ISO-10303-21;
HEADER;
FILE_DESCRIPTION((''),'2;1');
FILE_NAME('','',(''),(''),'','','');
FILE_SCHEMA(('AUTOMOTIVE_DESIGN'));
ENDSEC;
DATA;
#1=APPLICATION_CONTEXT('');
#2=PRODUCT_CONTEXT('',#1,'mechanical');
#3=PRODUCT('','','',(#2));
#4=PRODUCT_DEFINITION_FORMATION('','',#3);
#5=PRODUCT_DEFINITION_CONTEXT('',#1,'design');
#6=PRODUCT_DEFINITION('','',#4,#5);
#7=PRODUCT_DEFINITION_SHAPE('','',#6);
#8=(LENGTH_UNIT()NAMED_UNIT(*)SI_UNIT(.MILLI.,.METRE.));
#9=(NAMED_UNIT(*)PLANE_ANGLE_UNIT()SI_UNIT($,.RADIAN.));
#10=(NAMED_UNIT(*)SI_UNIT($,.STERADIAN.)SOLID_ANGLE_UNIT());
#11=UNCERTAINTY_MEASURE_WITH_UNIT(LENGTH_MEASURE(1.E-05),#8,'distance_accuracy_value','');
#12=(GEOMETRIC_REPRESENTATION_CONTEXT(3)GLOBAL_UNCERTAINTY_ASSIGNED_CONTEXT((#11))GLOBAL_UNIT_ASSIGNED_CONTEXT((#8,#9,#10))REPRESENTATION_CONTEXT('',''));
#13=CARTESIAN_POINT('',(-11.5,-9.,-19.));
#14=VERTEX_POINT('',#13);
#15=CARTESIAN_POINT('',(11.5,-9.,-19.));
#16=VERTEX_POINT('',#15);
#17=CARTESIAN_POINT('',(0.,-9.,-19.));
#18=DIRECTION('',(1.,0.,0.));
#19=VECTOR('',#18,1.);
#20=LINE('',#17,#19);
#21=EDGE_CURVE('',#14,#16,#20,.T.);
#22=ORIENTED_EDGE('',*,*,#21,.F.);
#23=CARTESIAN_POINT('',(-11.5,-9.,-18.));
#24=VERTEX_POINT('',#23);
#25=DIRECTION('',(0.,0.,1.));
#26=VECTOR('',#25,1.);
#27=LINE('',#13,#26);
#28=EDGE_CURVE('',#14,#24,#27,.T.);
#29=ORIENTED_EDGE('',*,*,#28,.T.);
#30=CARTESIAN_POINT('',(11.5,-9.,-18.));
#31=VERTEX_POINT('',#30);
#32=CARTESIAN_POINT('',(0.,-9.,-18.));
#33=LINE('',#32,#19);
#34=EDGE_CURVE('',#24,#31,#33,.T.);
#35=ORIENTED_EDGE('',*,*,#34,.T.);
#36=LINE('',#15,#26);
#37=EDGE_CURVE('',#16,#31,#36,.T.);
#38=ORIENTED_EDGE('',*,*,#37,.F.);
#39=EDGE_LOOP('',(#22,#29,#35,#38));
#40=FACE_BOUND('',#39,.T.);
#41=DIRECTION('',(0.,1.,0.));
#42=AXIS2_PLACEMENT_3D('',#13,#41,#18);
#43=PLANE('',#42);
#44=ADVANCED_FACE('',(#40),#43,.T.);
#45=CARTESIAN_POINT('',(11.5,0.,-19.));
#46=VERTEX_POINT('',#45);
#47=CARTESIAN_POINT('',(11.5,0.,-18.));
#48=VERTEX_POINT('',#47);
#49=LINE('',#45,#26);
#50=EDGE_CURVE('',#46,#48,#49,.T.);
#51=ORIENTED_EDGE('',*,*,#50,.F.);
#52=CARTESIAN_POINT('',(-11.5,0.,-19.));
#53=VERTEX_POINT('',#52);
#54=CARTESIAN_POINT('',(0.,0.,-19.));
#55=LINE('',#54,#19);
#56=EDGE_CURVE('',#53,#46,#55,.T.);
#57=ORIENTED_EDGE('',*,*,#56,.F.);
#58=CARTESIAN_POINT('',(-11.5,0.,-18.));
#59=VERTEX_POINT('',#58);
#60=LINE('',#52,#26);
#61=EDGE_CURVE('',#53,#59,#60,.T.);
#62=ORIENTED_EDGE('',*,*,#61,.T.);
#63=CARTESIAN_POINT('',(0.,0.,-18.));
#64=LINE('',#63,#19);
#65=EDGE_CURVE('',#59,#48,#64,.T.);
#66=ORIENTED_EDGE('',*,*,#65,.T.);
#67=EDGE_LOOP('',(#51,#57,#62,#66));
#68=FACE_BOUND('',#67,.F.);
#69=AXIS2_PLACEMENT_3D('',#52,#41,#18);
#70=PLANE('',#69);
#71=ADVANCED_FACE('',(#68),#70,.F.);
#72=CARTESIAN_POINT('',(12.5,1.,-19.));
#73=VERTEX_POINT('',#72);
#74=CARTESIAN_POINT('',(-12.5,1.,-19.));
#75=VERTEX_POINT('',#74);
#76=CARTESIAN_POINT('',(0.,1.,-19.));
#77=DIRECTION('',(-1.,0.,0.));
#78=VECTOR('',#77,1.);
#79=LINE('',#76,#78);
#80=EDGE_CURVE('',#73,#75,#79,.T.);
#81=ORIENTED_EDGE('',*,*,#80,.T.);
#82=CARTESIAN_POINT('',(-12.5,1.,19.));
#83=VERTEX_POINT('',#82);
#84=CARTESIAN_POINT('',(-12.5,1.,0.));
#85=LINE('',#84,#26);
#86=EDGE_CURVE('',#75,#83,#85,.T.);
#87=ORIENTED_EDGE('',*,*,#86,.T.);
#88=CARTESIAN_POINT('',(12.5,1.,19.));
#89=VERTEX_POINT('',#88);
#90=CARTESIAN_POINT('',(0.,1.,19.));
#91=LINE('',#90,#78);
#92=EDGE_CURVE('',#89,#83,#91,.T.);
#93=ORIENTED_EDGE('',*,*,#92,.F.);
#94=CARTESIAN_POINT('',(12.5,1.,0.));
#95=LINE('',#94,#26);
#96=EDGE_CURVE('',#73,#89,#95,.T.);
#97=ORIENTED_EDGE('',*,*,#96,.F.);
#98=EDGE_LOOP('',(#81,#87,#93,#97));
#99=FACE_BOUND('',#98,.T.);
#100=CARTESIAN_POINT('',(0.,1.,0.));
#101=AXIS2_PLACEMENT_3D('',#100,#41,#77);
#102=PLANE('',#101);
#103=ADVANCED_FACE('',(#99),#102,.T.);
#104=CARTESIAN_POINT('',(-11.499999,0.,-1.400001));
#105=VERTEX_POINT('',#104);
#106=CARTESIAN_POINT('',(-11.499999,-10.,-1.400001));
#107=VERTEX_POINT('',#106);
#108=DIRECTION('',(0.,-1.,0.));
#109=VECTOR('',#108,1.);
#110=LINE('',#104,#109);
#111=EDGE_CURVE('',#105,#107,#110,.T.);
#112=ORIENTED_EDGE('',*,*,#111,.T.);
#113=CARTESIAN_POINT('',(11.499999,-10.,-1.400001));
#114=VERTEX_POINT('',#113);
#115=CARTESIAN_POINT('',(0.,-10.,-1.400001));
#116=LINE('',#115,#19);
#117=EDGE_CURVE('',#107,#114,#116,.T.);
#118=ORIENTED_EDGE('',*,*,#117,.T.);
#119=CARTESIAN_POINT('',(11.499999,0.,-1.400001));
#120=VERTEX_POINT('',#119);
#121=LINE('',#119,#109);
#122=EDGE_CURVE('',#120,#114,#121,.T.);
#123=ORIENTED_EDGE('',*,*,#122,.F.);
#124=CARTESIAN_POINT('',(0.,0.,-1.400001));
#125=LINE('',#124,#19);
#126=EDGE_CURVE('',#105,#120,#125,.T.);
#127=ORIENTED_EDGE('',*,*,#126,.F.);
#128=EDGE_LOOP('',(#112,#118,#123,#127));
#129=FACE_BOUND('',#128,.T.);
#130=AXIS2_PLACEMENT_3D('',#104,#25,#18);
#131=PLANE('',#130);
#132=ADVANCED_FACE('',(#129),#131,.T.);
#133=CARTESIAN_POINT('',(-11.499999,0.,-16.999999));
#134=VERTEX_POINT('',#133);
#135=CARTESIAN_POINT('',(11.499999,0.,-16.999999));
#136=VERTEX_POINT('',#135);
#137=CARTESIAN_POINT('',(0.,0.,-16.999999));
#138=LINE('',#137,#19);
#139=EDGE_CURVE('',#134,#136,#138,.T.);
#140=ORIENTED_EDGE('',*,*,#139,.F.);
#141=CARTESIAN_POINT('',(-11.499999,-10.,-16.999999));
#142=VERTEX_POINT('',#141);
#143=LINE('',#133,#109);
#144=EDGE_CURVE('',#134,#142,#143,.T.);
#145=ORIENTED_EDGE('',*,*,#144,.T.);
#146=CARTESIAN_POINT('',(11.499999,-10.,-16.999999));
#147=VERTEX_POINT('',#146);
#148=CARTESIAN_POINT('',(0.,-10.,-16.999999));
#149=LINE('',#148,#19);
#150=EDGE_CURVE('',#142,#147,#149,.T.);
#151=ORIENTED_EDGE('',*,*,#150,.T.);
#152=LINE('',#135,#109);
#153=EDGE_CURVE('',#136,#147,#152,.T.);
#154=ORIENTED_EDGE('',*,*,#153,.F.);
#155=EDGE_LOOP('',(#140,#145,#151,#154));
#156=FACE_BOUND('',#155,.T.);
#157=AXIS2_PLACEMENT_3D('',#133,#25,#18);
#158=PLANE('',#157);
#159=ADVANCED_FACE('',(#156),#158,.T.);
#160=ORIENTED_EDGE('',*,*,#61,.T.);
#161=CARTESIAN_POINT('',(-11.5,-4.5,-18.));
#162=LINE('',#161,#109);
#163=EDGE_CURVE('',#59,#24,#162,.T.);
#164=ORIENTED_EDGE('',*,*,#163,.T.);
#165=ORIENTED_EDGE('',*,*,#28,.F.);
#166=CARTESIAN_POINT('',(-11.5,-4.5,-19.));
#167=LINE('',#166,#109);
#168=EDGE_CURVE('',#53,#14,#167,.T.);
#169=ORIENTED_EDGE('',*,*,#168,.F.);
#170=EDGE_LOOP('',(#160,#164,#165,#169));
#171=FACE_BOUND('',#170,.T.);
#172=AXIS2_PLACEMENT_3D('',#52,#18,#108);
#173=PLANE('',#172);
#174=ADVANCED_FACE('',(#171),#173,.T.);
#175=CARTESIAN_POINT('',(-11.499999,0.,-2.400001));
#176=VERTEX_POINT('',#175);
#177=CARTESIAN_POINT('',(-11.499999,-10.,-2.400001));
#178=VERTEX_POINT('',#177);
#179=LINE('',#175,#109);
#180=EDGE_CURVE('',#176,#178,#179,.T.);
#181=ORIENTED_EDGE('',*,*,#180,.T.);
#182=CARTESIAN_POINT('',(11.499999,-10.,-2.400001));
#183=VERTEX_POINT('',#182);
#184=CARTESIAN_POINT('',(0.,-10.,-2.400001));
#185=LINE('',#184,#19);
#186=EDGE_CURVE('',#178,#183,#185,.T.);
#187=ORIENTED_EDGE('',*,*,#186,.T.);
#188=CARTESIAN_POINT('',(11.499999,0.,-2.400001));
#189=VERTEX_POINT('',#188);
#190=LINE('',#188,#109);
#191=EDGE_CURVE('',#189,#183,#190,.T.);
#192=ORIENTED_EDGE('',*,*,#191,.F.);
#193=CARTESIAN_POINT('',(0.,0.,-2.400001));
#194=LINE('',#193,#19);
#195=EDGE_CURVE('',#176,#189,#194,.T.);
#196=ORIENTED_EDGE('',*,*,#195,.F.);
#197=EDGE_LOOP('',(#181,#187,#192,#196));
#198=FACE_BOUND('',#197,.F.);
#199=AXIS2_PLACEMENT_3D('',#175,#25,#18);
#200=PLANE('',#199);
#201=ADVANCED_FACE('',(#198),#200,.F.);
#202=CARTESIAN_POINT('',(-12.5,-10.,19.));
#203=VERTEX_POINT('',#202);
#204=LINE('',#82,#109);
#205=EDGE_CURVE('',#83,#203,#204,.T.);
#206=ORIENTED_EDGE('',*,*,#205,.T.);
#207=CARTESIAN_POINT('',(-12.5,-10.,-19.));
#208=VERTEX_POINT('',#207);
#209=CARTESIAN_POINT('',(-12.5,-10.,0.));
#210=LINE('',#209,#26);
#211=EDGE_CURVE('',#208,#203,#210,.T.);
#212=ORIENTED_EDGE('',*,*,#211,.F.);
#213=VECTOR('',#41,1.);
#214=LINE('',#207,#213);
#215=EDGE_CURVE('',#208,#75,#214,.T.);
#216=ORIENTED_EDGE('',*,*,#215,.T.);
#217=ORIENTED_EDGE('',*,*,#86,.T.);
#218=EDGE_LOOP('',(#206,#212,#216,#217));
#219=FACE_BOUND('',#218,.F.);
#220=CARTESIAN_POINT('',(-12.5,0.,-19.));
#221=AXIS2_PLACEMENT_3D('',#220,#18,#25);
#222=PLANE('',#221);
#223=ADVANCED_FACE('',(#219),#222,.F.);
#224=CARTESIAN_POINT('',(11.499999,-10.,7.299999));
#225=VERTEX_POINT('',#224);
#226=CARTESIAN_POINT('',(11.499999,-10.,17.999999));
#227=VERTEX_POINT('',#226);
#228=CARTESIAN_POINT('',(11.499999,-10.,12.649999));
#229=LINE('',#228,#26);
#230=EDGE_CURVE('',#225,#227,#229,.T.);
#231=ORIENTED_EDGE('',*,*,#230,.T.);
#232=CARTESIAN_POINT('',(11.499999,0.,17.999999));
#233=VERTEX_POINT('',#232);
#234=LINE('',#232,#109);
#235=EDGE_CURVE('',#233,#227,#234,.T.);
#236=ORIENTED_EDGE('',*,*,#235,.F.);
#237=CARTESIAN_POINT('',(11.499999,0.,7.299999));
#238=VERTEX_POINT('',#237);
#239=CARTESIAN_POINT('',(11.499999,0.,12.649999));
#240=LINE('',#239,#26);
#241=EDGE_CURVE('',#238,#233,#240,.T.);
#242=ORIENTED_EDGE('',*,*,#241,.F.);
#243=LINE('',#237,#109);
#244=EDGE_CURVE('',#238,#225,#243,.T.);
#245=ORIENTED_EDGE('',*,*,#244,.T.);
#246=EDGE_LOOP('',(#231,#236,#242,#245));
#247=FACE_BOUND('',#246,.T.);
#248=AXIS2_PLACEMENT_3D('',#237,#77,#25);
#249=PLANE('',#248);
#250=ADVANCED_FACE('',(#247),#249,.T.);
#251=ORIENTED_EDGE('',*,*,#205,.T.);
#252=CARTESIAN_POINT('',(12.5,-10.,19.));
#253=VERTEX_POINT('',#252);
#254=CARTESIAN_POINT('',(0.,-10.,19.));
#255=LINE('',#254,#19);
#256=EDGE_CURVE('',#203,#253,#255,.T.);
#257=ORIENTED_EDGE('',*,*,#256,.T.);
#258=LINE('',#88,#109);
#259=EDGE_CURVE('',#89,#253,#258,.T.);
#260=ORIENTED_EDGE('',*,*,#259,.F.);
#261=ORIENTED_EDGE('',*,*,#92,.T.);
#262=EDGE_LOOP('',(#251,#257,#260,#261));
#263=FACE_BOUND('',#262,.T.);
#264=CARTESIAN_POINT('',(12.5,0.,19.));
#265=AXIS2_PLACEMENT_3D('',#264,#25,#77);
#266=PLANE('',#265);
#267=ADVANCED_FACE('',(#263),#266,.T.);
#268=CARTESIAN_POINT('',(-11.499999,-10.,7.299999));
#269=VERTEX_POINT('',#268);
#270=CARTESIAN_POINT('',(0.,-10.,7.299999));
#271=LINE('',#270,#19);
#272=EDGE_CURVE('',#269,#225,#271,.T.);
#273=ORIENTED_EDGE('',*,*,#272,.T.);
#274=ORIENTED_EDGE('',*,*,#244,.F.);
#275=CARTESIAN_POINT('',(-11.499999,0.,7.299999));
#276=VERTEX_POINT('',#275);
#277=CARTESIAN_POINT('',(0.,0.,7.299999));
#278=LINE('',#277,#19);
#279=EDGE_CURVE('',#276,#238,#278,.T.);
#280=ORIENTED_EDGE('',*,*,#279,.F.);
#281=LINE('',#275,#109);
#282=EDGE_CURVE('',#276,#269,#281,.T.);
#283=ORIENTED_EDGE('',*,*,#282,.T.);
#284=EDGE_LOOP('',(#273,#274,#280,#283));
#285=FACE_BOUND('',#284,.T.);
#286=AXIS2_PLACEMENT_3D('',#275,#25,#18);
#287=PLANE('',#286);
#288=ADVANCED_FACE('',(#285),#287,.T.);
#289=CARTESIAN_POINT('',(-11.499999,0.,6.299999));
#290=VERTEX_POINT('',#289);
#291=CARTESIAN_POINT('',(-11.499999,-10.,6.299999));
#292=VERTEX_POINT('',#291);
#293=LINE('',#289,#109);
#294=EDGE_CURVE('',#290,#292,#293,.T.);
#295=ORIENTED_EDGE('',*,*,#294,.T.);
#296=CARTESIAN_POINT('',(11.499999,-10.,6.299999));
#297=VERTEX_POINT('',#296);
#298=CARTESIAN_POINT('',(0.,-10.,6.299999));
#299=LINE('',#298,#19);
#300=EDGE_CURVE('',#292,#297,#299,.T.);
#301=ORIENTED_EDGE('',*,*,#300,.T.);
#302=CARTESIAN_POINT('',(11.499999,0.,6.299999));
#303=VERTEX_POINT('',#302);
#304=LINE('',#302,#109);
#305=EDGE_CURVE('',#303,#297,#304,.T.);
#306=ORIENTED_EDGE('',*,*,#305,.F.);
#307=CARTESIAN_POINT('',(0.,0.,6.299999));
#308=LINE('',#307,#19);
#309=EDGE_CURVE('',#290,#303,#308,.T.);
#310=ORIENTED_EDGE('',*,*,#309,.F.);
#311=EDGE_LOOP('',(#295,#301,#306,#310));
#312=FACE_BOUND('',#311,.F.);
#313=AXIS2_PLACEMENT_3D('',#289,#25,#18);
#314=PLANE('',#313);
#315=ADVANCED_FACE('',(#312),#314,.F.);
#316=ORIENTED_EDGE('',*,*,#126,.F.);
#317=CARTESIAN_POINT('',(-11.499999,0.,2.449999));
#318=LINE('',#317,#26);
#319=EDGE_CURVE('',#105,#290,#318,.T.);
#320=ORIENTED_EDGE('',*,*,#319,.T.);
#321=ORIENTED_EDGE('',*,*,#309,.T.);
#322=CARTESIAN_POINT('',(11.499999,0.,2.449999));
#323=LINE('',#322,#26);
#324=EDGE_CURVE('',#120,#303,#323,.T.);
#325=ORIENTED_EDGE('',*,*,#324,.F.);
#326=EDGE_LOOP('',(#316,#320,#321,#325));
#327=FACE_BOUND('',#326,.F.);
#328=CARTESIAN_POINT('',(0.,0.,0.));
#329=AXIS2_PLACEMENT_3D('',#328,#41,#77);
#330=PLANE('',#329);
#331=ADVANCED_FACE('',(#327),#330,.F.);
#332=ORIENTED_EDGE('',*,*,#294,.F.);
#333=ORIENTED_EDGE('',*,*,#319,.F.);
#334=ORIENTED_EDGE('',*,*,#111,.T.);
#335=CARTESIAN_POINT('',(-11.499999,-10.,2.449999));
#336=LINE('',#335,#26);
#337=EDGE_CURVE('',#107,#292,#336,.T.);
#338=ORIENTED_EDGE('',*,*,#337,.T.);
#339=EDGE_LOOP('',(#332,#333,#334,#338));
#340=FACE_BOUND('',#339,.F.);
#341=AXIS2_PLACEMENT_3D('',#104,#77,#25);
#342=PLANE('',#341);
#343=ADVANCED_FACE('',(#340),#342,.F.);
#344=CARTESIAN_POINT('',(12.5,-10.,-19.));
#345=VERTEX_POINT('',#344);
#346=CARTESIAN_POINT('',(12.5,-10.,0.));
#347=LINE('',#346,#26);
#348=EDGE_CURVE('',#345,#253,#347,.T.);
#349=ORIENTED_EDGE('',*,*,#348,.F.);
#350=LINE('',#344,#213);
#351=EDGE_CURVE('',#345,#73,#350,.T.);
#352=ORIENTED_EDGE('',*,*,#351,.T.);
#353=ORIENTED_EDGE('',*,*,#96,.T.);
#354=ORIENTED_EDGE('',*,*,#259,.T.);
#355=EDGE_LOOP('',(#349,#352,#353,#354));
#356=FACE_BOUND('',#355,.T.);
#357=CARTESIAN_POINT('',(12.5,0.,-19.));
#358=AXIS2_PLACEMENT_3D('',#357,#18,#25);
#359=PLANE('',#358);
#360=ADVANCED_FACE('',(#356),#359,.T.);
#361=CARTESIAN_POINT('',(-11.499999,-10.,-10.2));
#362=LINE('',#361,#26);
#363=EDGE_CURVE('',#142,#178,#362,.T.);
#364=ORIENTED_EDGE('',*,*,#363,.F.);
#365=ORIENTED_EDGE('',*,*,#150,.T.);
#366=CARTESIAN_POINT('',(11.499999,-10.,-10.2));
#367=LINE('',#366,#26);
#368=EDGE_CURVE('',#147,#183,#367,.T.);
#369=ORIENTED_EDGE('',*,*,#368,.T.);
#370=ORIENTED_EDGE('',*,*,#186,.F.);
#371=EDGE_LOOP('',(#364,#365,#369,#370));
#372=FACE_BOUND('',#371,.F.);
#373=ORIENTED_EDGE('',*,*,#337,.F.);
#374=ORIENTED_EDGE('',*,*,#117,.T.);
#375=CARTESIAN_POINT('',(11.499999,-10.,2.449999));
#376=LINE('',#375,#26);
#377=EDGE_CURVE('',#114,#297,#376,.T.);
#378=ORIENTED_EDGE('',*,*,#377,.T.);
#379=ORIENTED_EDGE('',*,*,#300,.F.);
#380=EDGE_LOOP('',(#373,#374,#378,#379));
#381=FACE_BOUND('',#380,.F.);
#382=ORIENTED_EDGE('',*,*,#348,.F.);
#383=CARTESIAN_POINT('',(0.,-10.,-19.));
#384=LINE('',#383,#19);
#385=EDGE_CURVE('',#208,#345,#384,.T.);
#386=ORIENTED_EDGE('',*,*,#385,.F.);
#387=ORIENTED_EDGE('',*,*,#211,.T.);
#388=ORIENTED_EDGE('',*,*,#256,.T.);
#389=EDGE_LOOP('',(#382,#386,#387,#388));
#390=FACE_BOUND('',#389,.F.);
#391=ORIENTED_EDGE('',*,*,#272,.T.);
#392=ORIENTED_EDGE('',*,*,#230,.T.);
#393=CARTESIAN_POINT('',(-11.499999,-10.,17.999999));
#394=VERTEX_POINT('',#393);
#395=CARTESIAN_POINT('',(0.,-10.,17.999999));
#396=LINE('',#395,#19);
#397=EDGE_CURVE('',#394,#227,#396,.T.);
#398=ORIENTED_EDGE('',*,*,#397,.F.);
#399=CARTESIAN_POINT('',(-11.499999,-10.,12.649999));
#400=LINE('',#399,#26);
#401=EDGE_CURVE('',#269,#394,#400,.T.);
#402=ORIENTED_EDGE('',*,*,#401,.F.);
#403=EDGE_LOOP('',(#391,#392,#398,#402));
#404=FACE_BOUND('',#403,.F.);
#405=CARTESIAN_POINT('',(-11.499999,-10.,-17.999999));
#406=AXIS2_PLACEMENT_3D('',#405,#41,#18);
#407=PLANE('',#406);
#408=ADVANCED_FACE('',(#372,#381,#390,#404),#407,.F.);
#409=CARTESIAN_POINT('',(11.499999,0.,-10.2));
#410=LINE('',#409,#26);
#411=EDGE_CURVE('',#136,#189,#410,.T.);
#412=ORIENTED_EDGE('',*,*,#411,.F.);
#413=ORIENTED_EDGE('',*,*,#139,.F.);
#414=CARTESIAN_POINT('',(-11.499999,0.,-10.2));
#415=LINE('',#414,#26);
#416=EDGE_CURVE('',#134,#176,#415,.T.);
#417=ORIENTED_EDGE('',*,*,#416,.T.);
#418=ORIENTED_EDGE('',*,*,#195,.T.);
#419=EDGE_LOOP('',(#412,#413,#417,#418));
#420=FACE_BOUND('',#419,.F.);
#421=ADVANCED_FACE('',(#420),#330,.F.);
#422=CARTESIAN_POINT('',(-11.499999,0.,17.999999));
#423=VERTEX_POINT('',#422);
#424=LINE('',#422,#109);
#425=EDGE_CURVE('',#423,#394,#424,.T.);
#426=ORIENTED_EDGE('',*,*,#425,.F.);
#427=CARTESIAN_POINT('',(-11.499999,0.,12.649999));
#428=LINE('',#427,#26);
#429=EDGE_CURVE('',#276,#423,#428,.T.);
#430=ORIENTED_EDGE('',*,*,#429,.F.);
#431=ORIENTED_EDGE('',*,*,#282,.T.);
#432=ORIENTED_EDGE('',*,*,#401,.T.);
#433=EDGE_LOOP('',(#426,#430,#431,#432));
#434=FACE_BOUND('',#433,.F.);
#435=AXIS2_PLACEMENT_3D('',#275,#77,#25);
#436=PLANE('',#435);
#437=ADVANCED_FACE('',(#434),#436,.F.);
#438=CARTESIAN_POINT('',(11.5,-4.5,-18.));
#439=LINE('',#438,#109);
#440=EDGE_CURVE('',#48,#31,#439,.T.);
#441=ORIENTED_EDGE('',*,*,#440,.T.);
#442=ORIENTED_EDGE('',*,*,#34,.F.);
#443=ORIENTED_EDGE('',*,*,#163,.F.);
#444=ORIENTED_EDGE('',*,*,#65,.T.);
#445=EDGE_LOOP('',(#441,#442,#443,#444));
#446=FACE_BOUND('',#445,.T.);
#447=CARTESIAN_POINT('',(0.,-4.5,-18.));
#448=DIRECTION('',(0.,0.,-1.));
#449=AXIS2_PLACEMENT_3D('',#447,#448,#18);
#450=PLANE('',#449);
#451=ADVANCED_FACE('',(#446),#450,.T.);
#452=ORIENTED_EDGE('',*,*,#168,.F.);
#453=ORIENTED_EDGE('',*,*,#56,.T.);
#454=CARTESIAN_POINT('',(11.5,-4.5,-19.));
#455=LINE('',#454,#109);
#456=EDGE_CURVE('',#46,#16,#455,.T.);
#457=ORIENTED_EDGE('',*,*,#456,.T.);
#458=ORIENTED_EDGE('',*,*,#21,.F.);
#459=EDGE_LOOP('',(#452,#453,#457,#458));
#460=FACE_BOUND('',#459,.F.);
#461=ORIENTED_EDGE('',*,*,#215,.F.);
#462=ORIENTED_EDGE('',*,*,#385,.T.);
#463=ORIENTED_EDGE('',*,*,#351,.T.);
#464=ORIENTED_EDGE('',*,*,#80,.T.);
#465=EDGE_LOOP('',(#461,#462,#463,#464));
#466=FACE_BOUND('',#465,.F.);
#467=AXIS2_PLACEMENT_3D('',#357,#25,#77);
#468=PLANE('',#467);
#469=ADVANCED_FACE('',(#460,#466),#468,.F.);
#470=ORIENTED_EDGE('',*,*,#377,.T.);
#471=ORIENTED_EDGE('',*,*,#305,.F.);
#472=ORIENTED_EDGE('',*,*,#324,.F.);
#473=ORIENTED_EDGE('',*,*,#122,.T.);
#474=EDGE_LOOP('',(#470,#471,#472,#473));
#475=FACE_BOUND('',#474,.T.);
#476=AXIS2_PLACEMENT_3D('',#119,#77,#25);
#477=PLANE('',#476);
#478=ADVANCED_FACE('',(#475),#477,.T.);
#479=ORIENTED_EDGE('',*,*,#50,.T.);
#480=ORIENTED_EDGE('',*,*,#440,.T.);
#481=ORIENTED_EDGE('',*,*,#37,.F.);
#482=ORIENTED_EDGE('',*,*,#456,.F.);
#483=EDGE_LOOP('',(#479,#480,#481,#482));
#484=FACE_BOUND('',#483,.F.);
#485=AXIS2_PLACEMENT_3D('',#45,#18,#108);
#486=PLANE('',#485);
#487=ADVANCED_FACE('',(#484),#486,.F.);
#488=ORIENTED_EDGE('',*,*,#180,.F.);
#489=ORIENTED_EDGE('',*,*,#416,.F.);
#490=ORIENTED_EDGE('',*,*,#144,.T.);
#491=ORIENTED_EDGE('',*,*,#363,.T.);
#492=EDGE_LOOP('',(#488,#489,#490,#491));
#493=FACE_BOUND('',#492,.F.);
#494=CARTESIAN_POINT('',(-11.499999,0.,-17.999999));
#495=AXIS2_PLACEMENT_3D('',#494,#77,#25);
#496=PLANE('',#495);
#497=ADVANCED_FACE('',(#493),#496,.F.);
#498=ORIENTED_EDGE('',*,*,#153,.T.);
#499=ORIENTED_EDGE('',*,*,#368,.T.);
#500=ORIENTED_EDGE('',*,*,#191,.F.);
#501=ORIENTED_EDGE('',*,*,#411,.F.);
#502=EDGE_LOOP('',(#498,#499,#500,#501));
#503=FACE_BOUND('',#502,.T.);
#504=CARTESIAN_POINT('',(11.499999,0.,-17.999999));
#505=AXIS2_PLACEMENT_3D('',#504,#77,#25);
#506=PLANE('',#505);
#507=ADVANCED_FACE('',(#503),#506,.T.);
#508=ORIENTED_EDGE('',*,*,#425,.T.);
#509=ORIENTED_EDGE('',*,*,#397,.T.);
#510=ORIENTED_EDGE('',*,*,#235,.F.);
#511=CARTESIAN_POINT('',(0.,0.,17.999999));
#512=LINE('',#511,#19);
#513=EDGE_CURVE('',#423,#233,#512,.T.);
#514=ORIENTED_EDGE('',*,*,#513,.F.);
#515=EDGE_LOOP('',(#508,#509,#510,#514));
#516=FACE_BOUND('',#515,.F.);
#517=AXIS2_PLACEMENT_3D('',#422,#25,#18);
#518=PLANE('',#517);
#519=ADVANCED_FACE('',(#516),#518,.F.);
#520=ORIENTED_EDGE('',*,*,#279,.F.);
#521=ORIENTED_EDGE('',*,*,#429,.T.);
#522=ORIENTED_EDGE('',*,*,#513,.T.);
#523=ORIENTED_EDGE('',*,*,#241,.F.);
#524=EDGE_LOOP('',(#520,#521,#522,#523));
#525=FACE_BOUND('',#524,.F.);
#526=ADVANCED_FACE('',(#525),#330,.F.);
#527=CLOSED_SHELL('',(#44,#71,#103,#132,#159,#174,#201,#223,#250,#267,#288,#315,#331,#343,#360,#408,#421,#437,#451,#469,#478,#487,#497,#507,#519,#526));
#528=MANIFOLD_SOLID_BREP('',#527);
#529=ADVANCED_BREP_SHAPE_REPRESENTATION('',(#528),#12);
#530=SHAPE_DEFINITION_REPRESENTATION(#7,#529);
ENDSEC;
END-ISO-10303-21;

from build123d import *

# Parameters (mm, degrees)
F0_W     = 25
F0_H     = 38
F0_W_2   = 22.9999984503
F0_H_2   = 15.5999984503
F0_H_3   = 7.7
F0_H_4   = 10.7
F1_DEPTH = 10
F2_W     = 25
F2_H     = 38
F2_W_2   = 22.9999984503
F2_H_2   = 15.5999984503
F2_H_3   = 7.7
F2_H_4   = 10.7
F3_DEPTH = 1
F4_DEPTH = 1
F5_W     = 23.0000000447
F5_H     = 9.0000000447
F6_DEPTH = 1


with BuildPart() as f1:
    # F0 (on Front) → F1 (new body)
    with BuildSketch(Plane.XZ):
        Rectangle(F0_W, F0_H)
        with Locations((0, -10.2)):
            Rectangle(F0_W_2, F0_H_2, mode=Mode.SUBTRACT)
        with Locations((0, 2.4499992251)):
            Rectangle(F0_W_2, F0_H_3, mode=Mode.SUBTRACT)
        with Locations((0, 12.6499992251)):
            Rectangle(F0_W_2, F0_H_4, mode=Mode.SUBTRACT)
    extrude(amount=F1_DEPTH)

    # F2 (on face) → F3 (join)
    with BuildSketch(Plane(origin=(0, 0, 0), x_dir=(-1, 0, 0), z_dir=(0, 1, 0))):
        Rectangle(F2_W, F2_H)
        with Locations((0, -10.2)):
            Rectangle(F2_W_2, F2_H_2, mode=Mode.SUBTRACT)
        with Locations((0, 2.4499992251)):
            Rectangle(F2_W_2, F2_H_3, mode=Mode.SUBTRACT)
        with Locations((0, 12.6499992251)):
            Rectangle(F2_W_2, F2_H_4, mode=Mode.SUBTRACT)
        with Locations((0, -10.2)):
            Rectangle(F2_W_2, F2_H_2)
        with Locations((0, 12.6499992251)):
            Rectangle(F2_W_2, F2_H_4)
        with Locations((0, 2.4499992251)):
            Rectangle(F2_W_2, F2_H_3)
    extrude(amount=F3_DEPTH)

    # F4 (add): a face of the model
    f4_faces = [f1.faces().sort_by_distance(p)[0] for p in [
        (0, -5, -17.9999992251),
    ]]
    extrude(f4_faces, amount=F4_DEPTH)

    # F5 (on face) → F6 (cut)
    with BuildSketch(Plane(origin=(0, 0, -19), x_dir=(1, 0, 0), z_dir=(0, 0, -1))):
        with Locations((0, 4.5)):
            Rectangle(F5_W, F5_H)
    extrude(amount=-F6_DEPTH, mode=Mode.SUBTRACT)


solid = f1.part
